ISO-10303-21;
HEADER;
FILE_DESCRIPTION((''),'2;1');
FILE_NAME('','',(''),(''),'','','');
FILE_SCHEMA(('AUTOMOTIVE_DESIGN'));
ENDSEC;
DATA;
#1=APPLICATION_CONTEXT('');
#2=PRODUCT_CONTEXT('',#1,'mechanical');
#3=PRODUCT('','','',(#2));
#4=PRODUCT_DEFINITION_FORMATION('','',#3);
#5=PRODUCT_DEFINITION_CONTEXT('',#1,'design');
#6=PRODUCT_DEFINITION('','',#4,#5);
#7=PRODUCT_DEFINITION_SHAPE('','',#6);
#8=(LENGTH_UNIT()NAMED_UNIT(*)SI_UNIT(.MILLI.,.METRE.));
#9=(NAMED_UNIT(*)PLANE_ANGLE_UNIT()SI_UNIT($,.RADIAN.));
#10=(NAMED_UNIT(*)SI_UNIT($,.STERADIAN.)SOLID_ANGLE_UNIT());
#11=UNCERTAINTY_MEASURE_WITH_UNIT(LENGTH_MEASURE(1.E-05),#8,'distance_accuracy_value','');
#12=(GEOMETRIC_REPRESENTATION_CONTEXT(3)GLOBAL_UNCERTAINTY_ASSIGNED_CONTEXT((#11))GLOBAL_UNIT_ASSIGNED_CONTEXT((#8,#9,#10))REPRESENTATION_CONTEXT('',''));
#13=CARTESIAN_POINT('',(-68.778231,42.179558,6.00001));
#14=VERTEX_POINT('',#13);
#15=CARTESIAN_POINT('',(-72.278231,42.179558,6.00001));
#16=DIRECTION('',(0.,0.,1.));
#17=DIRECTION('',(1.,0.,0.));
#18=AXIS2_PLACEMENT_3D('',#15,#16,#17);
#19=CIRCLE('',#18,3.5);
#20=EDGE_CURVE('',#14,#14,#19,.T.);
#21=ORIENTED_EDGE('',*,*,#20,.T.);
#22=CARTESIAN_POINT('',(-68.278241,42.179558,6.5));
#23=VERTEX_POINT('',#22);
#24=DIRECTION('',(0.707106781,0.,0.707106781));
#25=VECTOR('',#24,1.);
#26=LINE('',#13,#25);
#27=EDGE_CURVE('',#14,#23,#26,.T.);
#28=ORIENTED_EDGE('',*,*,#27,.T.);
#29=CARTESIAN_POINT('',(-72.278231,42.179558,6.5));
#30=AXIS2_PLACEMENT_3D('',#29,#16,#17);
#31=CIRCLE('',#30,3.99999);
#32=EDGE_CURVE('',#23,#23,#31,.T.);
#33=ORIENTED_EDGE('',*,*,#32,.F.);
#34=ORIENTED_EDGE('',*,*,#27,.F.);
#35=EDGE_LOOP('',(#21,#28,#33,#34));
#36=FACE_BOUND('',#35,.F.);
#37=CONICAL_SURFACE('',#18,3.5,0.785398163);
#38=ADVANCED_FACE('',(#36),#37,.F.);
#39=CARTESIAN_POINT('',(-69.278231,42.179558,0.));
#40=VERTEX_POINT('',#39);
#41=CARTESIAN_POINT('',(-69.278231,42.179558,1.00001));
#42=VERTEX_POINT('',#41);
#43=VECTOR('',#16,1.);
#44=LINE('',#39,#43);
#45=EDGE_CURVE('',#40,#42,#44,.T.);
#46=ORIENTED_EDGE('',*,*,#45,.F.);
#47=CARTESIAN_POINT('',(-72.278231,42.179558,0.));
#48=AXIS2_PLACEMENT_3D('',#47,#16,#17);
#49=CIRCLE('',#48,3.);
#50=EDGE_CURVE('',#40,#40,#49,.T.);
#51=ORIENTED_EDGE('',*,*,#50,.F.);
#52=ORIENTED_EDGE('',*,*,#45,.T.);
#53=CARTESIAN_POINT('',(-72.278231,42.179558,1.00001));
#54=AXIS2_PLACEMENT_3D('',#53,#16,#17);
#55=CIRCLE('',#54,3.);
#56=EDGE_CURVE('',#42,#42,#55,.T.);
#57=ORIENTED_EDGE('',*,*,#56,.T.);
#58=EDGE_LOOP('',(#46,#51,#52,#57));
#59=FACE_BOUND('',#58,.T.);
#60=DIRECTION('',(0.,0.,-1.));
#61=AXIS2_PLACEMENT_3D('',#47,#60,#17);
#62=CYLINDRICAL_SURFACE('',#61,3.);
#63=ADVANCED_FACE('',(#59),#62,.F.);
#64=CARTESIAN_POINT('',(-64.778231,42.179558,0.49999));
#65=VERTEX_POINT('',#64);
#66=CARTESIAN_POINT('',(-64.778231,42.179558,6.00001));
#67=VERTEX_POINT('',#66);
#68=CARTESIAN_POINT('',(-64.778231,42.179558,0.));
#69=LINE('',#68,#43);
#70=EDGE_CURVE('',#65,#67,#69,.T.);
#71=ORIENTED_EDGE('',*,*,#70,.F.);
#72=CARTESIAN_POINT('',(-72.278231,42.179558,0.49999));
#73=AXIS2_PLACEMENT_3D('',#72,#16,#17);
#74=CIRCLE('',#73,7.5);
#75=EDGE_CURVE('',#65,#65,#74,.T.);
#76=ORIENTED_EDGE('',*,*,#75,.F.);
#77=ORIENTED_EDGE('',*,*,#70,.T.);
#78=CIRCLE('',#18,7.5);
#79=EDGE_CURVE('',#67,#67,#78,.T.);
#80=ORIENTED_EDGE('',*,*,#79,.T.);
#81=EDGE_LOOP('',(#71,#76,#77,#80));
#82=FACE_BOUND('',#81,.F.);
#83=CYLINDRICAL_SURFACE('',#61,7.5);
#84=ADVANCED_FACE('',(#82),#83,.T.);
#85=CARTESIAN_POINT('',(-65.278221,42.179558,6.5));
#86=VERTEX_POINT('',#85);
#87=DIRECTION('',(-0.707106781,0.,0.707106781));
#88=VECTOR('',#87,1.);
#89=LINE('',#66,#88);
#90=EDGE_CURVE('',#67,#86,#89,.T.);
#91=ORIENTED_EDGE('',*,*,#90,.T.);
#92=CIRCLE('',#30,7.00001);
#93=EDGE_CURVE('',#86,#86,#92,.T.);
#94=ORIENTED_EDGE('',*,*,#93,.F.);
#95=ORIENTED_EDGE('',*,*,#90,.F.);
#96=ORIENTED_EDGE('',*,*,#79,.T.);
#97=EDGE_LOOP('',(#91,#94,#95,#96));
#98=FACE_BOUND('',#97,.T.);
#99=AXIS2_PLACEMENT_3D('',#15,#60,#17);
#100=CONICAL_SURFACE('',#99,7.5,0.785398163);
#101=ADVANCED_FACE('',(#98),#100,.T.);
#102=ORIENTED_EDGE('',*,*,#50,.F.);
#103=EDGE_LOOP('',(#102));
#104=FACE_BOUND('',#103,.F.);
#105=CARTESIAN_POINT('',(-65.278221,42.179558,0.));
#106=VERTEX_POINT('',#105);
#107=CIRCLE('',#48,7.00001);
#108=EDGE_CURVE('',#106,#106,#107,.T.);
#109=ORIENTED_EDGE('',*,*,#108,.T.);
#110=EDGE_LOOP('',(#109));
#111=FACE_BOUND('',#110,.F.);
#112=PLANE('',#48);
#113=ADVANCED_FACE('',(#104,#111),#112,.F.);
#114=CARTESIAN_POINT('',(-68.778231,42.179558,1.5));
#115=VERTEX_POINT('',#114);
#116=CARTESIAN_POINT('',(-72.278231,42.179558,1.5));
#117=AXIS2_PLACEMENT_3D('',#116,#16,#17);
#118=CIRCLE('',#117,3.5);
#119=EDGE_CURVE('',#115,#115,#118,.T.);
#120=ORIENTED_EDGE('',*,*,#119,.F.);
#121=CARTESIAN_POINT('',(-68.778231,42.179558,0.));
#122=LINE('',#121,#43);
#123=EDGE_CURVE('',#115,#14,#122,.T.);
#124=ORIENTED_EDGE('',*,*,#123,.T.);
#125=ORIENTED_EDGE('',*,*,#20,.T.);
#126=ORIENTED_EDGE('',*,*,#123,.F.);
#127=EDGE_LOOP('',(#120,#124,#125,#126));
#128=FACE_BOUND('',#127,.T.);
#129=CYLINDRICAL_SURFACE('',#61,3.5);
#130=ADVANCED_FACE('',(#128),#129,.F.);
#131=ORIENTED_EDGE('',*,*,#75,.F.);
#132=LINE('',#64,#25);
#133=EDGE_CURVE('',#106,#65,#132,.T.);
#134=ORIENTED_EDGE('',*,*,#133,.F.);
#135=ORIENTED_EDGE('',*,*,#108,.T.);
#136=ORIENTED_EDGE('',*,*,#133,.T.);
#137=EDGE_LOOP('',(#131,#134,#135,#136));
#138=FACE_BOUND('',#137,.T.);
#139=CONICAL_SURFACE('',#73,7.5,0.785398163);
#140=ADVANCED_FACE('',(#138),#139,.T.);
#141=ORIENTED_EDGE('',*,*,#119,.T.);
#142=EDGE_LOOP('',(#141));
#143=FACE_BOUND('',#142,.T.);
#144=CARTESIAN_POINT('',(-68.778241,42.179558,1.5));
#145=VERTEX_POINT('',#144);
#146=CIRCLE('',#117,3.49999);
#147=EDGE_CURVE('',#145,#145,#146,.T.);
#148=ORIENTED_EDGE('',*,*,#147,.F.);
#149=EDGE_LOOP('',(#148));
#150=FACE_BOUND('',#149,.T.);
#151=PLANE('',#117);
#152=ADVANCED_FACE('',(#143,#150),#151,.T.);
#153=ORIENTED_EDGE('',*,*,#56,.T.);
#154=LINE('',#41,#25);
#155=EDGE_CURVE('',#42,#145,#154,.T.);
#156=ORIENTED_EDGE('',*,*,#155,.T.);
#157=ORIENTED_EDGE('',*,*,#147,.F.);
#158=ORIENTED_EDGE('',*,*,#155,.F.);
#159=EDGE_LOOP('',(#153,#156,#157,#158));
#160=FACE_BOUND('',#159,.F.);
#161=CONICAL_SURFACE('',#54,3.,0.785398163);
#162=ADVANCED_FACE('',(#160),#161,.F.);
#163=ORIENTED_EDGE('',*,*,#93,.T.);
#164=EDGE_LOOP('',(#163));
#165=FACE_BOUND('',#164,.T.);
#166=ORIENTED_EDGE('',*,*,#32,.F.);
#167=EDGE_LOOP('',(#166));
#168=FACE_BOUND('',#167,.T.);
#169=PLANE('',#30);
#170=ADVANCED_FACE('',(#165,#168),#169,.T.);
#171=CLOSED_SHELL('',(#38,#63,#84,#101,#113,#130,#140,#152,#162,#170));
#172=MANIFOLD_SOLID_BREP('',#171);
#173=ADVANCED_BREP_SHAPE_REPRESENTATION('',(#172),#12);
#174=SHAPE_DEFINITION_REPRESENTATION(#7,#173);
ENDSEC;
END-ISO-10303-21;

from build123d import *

# Parameters (mm, degrees)
F0_R     = 7.5
F0_R_2   = 3.5
F1_DEPTH = 6.5
F0_R_3   = 3
F2_DEPTH = 1.5
F3_SIZE  = 0.49999


# Not quite as in the source:
# - a fillet or chamfer is up to 0.001 mm smaller than in the source, because OpenCascade refuses the exact size


with BuildPart() as f1:
    # F0 (on Top) → F1 (new body)
    with BuildSketch(Plane.XY):
        with Locations((-72.2782313824, 42.1795584261)):
            Circle(F0_R)
        with Locations((-72.2782313824, 42.1795584261)):
            Circle(F0_R_2, mode=Mode.SUBTRACT)
    extrude(amount=F1_DEPTH)

    # F0 (on Top) → F2 (join)
    with BuildSketch(Plane.XY):
        with Locations((-72.2782313824, 42.1795584261)):
            Circle(F0_R_2)
        with Locations((-72.2782313824, 42.1795584261)):
            Circle(F0_R_3, mode=Mode.SUBTRACT)
    extrude(amount=F2_DEPTH)

    # F3 (size 0.5 in the source; OpenCascade refuses exactly that, so slightly less here)
    f3_edges = [f1.edges().sort_by_distance(p)[0] for p in [
        (-79.778231, 42.179558, 6.5),
        (-75.778231, 42.179558, 6.5),
        (-75.278231, 42.179558, 1.5),
        (-79.778231, 42.179558, 0),
    ]]
    chamfer(f3_edges, length=F3_SIZE)


solid = f1.part
